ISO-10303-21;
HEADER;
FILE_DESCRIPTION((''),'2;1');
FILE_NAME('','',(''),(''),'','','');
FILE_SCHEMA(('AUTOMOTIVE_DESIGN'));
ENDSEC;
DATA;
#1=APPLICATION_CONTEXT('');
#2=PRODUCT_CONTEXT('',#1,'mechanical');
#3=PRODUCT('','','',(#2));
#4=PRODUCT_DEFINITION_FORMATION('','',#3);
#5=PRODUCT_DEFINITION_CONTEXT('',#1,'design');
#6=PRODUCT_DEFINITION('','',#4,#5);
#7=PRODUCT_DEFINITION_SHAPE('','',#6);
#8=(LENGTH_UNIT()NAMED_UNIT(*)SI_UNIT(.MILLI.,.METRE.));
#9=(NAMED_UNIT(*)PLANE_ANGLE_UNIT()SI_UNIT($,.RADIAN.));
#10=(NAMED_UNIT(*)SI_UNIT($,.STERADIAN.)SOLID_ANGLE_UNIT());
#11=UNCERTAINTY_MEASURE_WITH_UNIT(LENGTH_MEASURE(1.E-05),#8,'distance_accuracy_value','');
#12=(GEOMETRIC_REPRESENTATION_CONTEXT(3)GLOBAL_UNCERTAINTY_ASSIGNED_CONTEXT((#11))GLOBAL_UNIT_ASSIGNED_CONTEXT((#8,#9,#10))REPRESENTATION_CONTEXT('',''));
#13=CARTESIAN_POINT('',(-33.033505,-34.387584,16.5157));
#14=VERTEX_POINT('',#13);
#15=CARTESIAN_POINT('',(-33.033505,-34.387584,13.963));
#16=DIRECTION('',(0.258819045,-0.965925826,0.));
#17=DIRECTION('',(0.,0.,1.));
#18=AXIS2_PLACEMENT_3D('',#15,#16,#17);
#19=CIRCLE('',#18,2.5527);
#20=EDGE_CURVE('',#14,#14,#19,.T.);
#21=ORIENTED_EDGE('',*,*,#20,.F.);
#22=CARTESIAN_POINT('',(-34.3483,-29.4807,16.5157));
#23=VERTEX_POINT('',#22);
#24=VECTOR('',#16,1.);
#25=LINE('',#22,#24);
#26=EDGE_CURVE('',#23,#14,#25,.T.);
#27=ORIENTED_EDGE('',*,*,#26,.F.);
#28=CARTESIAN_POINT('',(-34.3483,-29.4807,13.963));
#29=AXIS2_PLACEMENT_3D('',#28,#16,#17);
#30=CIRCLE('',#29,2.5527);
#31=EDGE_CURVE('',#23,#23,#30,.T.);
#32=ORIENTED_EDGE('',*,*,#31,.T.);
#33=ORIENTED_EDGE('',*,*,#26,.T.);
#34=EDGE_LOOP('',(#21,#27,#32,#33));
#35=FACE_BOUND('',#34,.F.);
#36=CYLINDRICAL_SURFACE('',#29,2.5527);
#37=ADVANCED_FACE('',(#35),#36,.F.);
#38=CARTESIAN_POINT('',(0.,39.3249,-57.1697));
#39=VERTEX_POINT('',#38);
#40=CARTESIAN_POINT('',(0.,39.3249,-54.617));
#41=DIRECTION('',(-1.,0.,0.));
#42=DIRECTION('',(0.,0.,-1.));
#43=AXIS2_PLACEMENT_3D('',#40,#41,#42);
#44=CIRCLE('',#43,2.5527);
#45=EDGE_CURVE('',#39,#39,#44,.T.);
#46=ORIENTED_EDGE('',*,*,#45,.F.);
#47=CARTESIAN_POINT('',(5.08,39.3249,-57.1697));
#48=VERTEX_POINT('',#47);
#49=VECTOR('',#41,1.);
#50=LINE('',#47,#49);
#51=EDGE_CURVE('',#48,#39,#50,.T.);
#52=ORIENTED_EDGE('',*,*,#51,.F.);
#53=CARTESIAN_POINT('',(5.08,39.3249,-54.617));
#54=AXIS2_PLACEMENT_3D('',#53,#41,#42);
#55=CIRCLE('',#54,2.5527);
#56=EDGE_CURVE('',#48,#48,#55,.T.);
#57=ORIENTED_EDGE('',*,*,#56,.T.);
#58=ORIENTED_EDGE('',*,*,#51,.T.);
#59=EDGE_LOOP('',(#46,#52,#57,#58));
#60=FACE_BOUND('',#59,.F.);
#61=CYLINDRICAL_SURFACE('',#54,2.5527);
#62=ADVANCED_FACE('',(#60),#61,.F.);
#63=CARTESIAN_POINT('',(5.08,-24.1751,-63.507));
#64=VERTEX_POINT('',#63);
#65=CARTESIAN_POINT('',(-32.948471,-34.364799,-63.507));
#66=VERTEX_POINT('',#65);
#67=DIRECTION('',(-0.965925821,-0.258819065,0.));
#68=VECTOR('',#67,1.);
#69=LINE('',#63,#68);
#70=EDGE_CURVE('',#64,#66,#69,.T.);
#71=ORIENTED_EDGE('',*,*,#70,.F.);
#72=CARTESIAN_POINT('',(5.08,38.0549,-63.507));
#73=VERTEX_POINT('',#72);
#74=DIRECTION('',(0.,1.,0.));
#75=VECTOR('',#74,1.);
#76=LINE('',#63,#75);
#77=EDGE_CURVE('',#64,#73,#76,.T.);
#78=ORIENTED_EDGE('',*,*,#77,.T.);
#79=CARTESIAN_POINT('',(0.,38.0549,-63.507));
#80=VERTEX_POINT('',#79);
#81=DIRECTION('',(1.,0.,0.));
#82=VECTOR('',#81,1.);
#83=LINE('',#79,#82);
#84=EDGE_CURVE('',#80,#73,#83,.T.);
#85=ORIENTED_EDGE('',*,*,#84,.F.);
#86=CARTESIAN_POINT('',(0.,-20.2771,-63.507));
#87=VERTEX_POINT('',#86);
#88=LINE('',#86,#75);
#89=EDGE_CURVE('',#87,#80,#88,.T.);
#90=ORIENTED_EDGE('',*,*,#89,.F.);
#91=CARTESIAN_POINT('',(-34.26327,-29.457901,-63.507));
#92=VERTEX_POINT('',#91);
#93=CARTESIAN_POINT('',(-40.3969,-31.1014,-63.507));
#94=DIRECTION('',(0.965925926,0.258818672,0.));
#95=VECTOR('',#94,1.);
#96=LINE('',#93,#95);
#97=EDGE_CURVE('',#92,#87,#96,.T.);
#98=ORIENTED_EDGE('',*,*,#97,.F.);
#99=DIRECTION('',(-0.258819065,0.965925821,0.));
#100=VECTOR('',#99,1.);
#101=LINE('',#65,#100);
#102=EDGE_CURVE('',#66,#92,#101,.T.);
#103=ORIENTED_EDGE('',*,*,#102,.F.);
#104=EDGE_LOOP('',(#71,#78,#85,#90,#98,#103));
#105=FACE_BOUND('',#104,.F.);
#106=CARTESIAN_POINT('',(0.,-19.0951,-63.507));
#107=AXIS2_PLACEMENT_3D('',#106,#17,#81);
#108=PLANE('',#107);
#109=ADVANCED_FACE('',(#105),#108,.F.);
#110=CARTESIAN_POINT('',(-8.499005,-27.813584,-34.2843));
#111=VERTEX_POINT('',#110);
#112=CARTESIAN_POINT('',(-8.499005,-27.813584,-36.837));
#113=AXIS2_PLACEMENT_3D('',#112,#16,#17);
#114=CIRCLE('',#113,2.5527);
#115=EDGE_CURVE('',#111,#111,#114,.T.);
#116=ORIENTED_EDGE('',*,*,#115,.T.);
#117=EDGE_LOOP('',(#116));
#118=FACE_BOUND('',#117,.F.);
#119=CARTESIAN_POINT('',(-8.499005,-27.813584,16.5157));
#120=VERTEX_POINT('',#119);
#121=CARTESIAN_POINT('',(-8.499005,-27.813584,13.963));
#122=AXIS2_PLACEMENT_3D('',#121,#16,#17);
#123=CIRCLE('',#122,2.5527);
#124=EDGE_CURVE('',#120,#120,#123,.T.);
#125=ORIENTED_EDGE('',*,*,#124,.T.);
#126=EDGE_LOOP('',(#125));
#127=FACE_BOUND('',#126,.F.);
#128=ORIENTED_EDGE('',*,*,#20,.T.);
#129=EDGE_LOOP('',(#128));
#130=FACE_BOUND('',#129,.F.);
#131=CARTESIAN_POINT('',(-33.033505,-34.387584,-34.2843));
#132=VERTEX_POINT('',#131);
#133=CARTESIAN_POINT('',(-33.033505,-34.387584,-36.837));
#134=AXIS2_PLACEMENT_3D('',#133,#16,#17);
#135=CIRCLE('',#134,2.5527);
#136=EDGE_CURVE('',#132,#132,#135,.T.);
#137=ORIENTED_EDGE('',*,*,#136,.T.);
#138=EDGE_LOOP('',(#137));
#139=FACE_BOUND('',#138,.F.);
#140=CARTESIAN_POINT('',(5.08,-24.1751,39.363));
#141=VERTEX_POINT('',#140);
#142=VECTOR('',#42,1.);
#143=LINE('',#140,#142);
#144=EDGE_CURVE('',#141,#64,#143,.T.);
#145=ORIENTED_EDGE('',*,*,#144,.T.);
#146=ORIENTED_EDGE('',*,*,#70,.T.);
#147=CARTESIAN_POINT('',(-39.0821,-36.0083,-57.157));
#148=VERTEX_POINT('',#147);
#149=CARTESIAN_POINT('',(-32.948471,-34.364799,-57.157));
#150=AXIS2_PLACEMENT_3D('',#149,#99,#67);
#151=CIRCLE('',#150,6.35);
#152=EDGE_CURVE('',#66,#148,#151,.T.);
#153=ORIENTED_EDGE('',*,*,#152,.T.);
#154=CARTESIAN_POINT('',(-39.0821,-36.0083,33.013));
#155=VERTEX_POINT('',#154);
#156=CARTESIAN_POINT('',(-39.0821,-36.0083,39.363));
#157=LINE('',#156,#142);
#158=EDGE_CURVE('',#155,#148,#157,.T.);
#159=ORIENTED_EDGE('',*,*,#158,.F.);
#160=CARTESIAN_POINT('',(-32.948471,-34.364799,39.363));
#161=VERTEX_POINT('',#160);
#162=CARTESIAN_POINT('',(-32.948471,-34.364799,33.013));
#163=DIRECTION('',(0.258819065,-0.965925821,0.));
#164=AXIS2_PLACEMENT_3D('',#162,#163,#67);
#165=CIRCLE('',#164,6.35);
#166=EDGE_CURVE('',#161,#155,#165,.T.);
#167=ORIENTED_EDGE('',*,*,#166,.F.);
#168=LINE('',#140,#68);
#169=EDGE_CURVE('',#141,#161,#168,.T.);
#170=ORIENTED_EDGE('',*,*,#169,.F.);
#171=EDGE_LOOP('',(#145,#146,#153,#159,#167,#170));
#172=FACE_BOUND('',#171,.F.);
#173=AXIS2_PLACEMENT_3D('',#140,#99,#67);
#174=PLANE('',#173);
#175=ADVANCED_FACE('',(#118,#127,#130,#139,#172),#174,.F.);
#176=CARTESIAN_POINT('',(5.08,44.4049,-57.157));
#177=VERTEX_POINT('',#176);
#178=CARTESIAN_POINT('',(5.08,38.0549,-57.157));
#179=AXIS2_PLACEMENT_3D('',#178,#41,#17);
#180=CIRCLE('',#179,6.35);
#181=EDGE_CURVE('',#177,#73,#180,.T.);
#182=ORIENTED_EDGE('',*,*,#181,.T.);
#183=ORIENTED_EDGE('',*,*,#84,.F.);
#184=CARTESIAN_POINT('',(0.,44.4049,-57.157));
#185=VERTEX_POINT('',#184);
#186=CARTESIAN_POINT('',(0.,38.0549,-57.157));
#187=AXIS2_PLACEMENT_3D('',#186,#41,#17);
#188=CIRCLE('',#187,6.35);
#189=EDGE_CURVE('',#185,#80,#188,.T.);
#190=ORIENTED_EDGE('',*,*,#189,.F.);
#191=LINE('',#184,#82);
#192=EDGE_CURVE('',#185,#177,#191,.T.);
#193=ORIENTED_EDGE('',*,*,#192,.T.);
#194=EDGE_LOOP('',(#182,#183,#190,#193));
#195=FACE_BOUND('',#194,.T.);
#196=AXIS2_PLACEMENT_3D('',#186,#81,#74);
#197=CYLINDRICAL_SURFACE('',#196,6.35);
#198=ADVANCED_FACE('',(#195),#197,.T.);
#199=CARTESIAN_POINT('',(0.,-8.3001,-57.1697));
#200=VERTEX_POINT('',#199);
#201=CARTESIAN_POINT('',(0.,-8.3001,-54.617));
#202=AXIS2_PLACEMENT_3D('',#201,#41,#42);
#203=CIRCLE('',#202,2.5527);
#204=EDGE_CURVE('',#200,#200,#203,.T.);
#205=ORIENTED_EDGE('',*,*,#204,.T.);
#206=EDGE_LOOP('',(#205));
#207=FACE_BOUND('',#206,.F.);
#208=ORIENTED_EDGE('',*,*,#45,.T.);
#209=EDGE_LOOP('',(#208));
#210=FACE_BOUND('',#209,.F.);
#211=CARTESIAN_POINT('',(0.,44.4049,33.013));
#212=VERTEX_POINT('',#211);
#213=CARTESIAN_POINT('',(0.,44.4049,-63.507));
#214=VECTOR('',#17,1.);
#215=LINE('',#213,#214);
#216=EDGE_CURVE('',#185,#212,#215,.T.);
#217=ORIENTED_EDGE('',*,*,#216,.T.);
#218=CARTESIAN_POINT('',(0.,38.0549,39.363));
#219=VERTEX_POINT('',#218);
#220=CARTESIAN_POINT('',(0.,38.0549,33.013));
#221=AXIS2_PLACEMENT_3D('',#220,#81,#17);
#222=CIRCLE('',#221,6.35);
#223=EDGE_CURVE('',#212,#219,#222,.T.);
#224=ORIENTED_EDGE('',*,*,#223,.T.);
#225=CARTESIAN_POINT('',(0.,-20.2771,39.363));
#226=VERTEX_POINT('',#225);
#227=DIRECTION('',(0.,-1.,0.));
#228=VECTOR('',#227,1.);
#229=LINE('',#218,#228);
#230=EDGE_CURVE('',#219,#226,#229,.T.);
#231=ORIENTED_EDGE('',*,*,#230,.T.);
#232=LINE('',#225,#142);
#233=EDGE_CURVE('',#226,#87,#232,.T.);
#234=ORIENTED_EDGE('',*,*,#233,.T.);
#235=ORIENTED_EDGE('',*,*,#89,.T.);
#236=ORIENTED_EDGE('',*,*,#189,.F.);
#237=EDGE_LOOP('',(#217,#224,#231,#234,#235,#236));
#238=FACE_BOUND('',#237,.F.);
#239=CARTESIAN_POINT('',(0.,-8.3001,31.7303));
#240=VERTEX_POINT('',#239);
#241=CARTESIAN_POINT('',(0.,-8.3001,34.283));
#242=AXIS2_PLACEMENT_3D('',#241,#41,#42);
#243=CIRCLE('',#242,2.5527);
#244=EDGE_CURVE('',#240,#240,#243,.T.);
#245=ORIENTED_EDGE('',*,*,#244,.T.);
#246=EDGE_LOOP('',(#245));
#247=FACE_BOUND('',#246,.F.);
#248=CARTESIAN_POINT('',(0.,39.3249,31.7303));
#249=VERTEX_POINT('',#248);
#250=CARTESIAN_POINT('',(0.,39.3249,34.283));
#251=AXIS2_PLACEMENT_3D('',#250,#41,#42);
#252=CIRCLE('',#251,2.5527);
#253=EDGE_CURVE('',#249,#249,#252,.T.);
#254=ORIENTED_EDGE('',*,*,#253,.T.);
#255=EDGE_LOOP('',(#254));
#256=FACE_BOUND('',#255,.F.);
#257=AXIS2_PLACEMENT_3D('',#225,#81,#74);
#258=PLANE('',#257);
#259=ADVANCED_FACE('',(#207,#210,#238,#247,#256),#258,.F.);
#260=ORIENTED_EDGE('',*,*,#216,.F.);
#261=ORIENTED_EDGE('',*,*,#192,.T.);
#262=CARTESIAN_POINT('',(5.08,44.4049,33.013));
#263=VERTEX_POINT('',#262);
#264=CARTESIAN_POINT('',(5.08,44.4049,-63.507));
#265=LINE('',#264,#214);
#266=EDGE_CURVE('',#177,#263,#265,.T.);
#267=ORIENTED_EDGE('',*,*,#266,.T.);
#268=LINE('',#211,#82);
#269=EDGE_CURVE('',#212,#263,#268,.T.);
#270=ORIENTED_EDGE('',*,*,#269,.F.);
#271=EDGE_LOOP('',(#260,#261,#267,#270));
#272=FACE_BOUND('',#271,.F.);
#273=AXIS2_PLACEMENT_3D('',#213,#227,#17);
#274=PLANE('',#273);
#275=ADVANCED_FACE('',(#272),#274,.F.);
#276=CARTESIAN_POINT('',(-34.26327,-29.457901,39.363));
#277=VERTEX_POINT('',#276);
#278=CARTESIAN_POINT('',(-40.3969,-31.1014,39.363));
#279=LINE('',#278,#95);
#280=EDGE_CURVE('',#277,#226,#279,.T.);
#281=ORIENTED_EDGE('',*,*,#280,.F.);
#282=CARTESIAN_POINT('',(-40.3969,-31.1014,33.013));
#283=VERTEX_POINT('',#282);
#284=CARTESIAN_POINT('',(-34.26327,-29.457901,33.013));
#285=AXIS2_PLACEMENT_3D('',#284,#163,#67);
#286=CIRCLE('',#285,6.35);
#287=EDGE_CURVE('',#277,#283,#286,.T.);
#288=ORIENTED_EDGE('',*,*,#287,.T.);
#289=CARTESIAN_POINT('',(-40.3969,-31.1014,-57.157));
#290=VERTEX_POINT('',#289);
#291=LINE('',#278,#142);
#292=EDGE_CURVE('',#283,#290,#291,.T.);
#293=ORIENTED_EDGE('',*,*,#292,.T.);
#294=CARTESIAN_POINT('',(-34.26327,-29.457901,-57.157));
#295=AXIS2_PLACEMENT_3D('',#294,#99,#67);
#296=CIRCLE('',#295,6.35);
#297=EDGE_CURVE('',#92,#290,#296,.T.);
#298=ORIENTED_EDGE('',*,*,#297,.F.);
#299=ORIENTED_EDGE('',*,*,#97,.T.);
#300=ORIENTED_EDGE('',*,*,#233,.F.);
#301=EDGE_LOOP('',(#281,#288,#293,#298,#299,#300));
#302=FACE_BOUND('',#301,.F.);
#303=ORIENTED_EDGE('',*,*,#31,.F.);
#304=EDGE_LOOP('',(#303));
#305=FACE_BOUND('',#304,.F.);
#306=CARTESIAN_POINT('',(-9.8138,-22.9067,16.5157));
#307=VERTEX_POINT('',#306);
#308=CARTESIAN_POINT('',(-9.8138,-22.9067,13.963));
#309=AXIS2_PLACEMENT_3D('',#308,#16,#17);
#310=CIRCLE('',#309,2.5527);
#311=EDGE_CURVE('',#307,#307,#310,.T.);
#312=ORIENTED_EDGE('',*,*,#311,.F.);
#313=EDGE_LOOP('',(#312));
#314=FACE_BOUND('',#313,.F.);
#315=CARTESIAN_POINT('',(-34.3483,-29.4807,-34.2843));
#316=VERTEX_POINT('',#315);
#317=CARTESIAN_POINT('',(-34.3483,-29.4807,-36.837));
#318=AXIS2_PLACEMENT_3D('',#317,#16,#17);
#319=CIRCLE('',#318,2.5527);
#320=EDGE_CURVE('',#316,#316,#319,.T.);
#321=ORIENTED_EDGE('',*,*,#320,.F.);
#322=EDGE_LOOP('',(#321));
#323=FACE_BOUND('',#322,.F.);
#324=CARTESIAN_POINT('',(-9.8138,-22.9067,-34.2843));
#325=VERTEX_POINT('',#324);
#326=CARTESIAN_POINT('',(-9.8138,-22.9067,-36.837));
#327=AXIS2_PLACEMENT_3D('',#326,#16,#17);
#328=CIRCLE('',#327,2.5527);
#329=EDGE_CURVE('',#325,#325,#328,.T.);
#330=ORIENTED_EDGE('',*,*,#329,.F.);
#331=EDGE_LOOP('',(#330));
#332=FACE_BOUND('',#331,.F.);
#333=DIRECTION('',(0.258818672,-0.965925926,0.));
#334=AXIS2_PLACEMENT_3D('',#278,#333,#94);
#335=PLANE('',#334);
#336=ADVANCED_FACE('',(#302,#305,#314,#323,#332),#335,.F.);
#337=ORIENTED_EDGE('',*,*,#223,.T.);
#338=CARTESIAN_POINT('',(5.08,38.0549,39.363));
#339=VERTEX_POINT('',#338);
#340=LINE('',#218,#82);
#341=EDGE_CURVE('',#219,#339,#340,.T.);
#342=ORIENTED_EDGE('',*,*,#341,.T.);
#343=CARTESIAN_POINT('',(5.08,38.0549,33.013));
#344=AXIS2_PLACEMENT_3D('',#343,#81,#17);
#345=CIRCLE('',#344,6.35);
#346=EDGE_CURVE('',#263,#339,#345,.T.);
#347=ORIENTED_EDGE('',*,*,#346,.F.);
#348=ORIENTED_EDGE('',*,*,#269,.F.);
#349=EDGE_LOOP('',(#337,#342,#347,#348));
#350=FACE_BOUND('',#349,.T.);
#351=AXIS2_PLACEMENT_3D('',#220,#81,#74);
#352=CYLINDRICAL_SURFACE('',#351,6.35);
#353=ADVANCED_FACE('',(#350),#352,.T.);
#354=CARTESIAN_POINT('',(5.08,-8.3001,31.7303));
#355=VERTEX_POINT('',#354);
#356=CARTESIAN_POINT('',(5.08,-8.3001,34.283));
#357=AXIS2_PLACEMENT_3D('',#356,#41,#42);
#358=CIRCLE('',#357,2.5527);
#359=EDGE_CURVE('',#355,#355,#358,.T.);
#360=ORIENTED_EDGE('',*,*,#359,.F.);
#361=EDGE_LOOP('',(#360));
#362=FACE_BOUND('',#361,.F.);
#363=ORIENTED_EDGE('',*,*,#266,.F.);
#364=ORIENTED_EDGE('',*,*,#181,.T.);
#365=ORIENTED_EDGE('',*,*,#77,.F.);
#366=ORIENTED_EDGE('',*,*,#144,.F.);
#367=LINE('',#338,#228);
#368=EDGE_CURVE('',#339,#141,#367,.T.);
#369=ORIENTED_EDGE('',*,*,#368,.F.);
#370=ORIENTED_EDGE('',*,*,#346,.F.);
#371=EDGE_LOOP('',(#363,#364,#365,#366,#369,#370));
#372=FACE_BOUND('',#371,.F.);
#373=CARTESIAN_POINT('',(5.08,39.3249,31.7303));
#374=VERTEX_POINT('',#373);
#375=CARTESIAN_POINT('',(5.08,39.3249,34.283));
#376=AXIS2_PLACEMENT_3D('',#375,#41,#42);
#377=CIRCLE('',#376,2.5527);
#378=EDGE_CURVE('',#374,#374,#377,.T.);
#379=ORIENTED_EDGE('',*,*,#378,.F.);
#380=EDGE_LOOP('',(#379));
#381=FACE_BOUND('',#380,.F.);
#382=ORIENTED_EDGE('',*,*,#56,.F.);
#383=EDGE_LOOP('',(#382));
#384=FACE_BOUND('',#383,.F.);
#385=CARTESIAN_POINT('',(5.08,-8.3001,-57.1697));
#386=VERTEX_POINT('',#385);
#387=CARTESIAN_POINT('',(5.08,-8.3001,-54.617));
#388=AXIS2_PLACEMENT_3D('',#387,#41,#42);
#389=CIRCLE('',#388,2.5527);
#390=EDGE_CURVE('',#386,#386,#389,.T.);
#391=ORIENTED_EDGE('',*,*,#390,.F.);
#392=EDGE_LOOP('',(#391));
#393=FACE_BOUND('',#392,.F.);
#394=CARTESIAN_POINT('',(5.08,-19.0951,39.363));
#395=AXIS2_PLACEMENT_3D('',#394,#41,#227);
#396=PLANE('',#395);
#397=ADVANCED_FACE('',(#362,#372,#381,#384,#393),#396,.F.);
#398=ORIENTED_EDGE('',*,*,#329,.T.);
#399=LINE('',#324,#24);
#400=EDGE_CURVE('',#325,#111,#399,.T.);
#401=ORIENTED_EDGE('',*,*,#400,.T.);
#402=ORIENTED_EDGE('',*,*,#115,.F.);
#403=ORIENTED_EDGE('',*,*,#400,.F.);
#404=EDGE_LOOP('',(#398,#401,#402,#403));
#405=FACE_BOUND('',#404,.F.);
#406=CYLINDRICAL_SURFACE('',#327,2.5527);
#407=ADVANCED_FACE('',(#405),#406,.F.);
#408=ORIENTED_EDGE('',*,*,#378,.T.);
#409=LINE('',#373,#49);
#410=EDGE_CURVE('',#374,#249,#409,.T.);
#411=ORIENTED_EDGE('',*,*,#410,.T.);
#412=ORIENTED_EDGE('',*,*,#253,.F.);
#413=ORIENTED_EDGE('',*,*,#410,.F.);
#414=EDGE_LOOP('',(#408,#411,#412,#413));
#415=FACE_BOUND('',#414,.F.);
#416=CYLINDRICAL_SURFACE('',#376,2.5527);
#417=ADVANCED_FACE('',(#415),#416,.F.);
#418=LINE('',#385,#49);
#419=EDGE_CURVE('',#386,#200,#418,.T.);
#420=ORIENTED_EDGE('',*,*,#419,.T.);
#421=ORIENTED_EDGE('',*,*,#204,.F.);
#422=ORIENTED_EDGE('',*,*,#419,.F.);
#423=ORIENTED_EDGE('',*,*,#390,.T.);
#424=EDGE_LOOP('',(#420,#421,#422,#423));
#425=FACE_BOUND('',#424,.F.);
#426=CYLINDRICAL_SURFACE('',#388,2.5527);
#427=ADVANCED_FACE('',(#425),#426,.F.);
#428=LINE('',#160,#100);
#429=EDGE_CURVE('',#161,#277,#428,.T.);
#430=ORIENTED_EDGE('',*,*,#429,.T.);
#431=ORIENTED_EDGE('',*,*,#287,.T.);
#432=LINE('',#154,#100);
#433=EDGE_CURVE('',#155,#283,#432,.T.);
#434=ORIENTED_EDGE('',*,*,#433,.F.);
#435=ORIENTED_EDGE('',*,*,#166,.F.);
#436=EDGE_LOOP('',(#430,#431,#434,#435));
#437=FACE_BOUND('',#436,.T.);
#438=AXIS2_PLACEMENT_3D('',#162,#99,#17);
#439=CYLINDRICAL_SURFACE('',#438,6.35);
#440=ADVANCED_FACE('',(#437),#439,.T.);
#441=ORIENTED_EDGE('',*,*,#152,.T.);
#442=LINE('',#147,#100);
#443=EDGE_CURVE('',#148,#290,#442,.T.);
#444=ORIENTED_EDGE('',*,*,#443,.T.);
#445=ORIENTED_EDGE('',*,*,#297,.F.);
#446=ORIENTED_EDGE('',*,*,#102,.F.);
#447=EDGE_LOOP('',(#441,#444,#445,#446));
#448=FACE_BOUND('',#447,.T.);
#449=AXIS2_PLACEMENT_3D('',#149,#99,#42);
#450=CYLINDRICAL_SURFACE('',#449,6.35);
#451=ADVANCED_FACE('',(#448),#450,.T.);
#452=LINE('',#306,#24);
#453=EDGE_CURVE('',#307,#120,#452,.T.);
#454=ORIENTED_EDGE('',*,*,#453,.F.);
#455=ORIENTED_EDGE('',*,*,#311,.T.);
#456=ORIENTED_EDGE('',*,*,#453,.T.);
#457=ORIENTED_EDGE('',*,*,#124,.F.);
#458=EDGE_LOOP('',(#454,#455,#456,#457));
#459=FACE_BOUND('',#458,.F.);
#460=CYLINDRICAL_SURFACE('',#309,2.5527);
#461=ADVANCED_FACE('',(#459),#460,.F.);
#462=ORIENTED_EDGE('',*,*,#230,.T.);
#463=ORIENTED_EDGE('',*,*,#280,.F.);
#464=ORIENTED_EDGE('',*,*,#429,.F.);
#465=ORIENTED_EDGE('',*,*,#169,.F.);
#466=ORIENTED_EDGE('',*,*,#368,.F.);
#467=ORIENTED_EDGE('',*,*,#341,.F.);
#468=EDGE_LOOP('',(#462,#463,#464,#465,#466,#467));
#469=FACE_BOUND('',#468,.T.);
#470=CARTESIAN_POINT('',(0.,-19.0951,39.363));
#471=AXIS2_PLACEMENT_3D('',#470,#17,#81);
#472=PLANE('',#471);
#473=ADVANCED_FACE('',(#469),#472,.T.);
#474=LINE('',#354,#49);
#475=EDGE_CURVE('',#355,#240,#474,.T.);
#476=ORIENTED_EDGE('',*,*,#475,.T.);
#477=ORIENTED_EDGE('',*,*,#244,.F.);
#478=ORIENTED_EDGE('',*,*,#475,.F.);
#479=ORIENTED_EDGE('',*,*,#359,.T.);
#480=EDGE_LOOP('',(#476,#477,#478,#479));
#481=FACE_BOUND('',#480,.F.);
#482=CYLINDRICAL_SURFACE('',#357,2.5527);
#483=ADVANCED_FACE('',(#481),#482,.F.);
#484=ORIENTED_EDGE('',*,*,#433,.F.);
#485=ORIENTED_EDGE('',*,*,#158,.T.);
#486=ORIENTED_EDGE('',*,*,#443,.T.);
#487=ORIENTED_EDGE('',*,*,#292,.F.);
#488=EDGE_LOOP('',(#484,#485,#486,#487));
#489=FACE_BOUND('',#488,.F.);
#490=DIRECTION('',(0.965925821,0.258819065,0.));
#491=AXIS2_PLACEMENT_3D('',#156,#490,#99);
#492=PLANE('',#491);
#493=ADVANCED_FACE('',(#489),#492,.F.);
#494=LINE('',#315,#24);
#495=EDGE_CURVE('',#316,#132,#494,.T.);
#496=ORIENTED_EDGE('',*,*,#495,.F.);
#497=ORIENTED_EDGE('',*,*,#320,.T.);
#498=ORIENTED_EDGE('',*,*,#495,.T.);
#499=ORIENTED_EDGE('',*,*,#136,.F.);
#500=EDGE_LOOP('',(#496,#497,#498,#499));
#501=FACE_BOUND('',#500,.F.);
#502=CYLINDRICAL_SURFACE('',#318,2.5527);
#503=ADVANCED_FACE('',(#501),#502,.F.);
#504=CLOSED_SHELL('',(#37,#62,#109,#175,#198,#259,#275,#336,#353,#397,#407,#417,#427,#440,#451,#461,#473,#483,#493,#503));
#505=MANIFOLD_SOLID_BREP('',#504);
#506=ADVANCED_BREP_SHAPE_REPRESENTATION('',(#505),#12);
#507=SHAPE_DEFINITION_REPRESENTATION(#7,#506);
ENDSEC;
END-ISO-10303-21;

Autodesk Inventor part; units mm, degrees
ref_plane "YZ Plane" through (0, 0, 0) normal (1, 0, 0) x (0, 1, 0)
ref_plane "XZ Plane" through (0, 0, 0) normal (0, 1, 0) x (-1, 0, 0)
ref_plane "XY Plane" through (0, 0, 0) normal (0, 0, 1) x (1, 0, 0)
sketch "Sketch1" plane through (0, 0, 0) normal (1, 0, 0) x (0, 1, 0)
  line L0 (44.4049, 39.363) -> (-19.0951, 39.363)
  line L1 (-19.0951, 39.363) -> (-19.0951, -63.507)
  line L2 (-19.0951, -63.507) -> (44.4049, -63.507)
  line L3 (44.4049, -63.507) -> (44.4049, 39.363)
  point P0 (0, 0)
  dimension "d0" = 102.87
  dimension "d1" = 63.5
extrude "Extrusion1" add sketch "Sketch1" along normal blind 5.08
sketch "Sketch2" plane through (5.08, 0, 0) normal (1, 0, 0) x (0, 0, -1)
  line L0 (63.507, 44.4049) -> (-39.363, 44.4049) projected
  line L1 (-39.363, 44.4049) -> (-39.363, -19.0951) projected
  point P0 (0, 0)
  point P1 (-34.283, 39.3249)
  point P2 (54.617, 39.3249)
  point P3 (54.617, -8.3001)
  point P4 (-34.283, -8.3001)
  dimension "d4" = 0
  dimension "d5" = 0
  dimension "d6" = 0
  dimension "d7" = 0
  dimension "d8" = 88.9
  dimension "d9" = 5.08
  dimension "d10" = 5.08
  dimension "d11" = 47.625
hole "Hole1" at (5.08, 39.3249, 34.283) at (5.08, 39.3249, -54.617) at (5.08, -8.3001, -54.617) at (5.08, -8.3001, 34.283) direction (-1, 0, 0) diameter 5.1054 end through all clearance for "Flat Head Machine Screw (82)" size "#10" standard "Ansi Unified Screw Threads"
fillet "Fillet1" radius 6.35 2 edges at (2.54, 44.4049, 39.363) (2.54, 44.4049, -63.507)
sketch "Sketch7" plane through (0, -19.0951, 39.363) normal (0, 0, 1) x (1, 0, 0)
  line L0 (0, 0) -> (5.08, 0)
  line L1 (5.08, 0) -> (5.08, -5.08)
  line L2 (5.08, -5.08) -> (-39.0821, -16.9132)
  line L3 (-39.0821, -16.9132) -> (-40.3969, -12.0063)
  line L4 (-40.3969, -12.0063) -> (0, -1.182)
  line L5 (0, -1.182) -> (0, 0)
  line L6 (0, 0) -> (5.08, 0) projected
  line L7 (0, 57.15) -> (0, 0) projected
  point P0 (0, 19.0951)
  dimension "d51" = 5.08
  dimension "d52" = 5.08
  dimension "d53" = 105
  dimension "d54" = 5.08
  dimension "d55" = 45.72
  dimension "d56" = 0
  dimension "d57" = 0
extrude "Extrusion4" add sketch "Sketch7" against normal blind 102.87
sketch "Sketch8" plane through (0, -20.2771, 39.363) normal (-0.258819, 0.9659258, 0) x (0.9659258, 0.258819, 0)
  line L0 (0, 0) -> (0, 102.87) projected
  line L1 (-41.822, 0) -> (0, 0) projected
  line L2 (-41.822, 102.87) -> (0, 102.87) projected
  point P0 (5.2481, 39.363)
  point P1 (-10.16, 25.4)
  point P2 (-35.56, 25.4)
  point P3 (-35.56, 76.2)
  point P4 (-10.16, 76.2)
  dimension "d66" = 25.4
  dimension "d67" = 0
  dimension "d68" = 25.4
  dimension "d69" = 0
  dimension "d70" = 50.8
  dimension "d71" = 0
  dimension "d72" = 0
  dimension "d73" = 26.67
hole "Hole3" at (-9.8138, -22.9067, 13.963) at (-34.3483, -29.4807, 13.963) at (-34.3483, -29.4807, -36.837) at (-9.8138, -22.9067, -36.837) direction (0.258819, -0.9659258, 0) diameter 5.1054 end through all clearance for "Flat Head Machine Screw (82)" size "#10" standard "Ansi Unified Screw Threads"
fillet "Fillet2" radius 6.35 2 edges at (-39.7395, -33.5549, -63.507) (-39.7395, -33.5549, 39.363)
properties part number "LimeLight120"
